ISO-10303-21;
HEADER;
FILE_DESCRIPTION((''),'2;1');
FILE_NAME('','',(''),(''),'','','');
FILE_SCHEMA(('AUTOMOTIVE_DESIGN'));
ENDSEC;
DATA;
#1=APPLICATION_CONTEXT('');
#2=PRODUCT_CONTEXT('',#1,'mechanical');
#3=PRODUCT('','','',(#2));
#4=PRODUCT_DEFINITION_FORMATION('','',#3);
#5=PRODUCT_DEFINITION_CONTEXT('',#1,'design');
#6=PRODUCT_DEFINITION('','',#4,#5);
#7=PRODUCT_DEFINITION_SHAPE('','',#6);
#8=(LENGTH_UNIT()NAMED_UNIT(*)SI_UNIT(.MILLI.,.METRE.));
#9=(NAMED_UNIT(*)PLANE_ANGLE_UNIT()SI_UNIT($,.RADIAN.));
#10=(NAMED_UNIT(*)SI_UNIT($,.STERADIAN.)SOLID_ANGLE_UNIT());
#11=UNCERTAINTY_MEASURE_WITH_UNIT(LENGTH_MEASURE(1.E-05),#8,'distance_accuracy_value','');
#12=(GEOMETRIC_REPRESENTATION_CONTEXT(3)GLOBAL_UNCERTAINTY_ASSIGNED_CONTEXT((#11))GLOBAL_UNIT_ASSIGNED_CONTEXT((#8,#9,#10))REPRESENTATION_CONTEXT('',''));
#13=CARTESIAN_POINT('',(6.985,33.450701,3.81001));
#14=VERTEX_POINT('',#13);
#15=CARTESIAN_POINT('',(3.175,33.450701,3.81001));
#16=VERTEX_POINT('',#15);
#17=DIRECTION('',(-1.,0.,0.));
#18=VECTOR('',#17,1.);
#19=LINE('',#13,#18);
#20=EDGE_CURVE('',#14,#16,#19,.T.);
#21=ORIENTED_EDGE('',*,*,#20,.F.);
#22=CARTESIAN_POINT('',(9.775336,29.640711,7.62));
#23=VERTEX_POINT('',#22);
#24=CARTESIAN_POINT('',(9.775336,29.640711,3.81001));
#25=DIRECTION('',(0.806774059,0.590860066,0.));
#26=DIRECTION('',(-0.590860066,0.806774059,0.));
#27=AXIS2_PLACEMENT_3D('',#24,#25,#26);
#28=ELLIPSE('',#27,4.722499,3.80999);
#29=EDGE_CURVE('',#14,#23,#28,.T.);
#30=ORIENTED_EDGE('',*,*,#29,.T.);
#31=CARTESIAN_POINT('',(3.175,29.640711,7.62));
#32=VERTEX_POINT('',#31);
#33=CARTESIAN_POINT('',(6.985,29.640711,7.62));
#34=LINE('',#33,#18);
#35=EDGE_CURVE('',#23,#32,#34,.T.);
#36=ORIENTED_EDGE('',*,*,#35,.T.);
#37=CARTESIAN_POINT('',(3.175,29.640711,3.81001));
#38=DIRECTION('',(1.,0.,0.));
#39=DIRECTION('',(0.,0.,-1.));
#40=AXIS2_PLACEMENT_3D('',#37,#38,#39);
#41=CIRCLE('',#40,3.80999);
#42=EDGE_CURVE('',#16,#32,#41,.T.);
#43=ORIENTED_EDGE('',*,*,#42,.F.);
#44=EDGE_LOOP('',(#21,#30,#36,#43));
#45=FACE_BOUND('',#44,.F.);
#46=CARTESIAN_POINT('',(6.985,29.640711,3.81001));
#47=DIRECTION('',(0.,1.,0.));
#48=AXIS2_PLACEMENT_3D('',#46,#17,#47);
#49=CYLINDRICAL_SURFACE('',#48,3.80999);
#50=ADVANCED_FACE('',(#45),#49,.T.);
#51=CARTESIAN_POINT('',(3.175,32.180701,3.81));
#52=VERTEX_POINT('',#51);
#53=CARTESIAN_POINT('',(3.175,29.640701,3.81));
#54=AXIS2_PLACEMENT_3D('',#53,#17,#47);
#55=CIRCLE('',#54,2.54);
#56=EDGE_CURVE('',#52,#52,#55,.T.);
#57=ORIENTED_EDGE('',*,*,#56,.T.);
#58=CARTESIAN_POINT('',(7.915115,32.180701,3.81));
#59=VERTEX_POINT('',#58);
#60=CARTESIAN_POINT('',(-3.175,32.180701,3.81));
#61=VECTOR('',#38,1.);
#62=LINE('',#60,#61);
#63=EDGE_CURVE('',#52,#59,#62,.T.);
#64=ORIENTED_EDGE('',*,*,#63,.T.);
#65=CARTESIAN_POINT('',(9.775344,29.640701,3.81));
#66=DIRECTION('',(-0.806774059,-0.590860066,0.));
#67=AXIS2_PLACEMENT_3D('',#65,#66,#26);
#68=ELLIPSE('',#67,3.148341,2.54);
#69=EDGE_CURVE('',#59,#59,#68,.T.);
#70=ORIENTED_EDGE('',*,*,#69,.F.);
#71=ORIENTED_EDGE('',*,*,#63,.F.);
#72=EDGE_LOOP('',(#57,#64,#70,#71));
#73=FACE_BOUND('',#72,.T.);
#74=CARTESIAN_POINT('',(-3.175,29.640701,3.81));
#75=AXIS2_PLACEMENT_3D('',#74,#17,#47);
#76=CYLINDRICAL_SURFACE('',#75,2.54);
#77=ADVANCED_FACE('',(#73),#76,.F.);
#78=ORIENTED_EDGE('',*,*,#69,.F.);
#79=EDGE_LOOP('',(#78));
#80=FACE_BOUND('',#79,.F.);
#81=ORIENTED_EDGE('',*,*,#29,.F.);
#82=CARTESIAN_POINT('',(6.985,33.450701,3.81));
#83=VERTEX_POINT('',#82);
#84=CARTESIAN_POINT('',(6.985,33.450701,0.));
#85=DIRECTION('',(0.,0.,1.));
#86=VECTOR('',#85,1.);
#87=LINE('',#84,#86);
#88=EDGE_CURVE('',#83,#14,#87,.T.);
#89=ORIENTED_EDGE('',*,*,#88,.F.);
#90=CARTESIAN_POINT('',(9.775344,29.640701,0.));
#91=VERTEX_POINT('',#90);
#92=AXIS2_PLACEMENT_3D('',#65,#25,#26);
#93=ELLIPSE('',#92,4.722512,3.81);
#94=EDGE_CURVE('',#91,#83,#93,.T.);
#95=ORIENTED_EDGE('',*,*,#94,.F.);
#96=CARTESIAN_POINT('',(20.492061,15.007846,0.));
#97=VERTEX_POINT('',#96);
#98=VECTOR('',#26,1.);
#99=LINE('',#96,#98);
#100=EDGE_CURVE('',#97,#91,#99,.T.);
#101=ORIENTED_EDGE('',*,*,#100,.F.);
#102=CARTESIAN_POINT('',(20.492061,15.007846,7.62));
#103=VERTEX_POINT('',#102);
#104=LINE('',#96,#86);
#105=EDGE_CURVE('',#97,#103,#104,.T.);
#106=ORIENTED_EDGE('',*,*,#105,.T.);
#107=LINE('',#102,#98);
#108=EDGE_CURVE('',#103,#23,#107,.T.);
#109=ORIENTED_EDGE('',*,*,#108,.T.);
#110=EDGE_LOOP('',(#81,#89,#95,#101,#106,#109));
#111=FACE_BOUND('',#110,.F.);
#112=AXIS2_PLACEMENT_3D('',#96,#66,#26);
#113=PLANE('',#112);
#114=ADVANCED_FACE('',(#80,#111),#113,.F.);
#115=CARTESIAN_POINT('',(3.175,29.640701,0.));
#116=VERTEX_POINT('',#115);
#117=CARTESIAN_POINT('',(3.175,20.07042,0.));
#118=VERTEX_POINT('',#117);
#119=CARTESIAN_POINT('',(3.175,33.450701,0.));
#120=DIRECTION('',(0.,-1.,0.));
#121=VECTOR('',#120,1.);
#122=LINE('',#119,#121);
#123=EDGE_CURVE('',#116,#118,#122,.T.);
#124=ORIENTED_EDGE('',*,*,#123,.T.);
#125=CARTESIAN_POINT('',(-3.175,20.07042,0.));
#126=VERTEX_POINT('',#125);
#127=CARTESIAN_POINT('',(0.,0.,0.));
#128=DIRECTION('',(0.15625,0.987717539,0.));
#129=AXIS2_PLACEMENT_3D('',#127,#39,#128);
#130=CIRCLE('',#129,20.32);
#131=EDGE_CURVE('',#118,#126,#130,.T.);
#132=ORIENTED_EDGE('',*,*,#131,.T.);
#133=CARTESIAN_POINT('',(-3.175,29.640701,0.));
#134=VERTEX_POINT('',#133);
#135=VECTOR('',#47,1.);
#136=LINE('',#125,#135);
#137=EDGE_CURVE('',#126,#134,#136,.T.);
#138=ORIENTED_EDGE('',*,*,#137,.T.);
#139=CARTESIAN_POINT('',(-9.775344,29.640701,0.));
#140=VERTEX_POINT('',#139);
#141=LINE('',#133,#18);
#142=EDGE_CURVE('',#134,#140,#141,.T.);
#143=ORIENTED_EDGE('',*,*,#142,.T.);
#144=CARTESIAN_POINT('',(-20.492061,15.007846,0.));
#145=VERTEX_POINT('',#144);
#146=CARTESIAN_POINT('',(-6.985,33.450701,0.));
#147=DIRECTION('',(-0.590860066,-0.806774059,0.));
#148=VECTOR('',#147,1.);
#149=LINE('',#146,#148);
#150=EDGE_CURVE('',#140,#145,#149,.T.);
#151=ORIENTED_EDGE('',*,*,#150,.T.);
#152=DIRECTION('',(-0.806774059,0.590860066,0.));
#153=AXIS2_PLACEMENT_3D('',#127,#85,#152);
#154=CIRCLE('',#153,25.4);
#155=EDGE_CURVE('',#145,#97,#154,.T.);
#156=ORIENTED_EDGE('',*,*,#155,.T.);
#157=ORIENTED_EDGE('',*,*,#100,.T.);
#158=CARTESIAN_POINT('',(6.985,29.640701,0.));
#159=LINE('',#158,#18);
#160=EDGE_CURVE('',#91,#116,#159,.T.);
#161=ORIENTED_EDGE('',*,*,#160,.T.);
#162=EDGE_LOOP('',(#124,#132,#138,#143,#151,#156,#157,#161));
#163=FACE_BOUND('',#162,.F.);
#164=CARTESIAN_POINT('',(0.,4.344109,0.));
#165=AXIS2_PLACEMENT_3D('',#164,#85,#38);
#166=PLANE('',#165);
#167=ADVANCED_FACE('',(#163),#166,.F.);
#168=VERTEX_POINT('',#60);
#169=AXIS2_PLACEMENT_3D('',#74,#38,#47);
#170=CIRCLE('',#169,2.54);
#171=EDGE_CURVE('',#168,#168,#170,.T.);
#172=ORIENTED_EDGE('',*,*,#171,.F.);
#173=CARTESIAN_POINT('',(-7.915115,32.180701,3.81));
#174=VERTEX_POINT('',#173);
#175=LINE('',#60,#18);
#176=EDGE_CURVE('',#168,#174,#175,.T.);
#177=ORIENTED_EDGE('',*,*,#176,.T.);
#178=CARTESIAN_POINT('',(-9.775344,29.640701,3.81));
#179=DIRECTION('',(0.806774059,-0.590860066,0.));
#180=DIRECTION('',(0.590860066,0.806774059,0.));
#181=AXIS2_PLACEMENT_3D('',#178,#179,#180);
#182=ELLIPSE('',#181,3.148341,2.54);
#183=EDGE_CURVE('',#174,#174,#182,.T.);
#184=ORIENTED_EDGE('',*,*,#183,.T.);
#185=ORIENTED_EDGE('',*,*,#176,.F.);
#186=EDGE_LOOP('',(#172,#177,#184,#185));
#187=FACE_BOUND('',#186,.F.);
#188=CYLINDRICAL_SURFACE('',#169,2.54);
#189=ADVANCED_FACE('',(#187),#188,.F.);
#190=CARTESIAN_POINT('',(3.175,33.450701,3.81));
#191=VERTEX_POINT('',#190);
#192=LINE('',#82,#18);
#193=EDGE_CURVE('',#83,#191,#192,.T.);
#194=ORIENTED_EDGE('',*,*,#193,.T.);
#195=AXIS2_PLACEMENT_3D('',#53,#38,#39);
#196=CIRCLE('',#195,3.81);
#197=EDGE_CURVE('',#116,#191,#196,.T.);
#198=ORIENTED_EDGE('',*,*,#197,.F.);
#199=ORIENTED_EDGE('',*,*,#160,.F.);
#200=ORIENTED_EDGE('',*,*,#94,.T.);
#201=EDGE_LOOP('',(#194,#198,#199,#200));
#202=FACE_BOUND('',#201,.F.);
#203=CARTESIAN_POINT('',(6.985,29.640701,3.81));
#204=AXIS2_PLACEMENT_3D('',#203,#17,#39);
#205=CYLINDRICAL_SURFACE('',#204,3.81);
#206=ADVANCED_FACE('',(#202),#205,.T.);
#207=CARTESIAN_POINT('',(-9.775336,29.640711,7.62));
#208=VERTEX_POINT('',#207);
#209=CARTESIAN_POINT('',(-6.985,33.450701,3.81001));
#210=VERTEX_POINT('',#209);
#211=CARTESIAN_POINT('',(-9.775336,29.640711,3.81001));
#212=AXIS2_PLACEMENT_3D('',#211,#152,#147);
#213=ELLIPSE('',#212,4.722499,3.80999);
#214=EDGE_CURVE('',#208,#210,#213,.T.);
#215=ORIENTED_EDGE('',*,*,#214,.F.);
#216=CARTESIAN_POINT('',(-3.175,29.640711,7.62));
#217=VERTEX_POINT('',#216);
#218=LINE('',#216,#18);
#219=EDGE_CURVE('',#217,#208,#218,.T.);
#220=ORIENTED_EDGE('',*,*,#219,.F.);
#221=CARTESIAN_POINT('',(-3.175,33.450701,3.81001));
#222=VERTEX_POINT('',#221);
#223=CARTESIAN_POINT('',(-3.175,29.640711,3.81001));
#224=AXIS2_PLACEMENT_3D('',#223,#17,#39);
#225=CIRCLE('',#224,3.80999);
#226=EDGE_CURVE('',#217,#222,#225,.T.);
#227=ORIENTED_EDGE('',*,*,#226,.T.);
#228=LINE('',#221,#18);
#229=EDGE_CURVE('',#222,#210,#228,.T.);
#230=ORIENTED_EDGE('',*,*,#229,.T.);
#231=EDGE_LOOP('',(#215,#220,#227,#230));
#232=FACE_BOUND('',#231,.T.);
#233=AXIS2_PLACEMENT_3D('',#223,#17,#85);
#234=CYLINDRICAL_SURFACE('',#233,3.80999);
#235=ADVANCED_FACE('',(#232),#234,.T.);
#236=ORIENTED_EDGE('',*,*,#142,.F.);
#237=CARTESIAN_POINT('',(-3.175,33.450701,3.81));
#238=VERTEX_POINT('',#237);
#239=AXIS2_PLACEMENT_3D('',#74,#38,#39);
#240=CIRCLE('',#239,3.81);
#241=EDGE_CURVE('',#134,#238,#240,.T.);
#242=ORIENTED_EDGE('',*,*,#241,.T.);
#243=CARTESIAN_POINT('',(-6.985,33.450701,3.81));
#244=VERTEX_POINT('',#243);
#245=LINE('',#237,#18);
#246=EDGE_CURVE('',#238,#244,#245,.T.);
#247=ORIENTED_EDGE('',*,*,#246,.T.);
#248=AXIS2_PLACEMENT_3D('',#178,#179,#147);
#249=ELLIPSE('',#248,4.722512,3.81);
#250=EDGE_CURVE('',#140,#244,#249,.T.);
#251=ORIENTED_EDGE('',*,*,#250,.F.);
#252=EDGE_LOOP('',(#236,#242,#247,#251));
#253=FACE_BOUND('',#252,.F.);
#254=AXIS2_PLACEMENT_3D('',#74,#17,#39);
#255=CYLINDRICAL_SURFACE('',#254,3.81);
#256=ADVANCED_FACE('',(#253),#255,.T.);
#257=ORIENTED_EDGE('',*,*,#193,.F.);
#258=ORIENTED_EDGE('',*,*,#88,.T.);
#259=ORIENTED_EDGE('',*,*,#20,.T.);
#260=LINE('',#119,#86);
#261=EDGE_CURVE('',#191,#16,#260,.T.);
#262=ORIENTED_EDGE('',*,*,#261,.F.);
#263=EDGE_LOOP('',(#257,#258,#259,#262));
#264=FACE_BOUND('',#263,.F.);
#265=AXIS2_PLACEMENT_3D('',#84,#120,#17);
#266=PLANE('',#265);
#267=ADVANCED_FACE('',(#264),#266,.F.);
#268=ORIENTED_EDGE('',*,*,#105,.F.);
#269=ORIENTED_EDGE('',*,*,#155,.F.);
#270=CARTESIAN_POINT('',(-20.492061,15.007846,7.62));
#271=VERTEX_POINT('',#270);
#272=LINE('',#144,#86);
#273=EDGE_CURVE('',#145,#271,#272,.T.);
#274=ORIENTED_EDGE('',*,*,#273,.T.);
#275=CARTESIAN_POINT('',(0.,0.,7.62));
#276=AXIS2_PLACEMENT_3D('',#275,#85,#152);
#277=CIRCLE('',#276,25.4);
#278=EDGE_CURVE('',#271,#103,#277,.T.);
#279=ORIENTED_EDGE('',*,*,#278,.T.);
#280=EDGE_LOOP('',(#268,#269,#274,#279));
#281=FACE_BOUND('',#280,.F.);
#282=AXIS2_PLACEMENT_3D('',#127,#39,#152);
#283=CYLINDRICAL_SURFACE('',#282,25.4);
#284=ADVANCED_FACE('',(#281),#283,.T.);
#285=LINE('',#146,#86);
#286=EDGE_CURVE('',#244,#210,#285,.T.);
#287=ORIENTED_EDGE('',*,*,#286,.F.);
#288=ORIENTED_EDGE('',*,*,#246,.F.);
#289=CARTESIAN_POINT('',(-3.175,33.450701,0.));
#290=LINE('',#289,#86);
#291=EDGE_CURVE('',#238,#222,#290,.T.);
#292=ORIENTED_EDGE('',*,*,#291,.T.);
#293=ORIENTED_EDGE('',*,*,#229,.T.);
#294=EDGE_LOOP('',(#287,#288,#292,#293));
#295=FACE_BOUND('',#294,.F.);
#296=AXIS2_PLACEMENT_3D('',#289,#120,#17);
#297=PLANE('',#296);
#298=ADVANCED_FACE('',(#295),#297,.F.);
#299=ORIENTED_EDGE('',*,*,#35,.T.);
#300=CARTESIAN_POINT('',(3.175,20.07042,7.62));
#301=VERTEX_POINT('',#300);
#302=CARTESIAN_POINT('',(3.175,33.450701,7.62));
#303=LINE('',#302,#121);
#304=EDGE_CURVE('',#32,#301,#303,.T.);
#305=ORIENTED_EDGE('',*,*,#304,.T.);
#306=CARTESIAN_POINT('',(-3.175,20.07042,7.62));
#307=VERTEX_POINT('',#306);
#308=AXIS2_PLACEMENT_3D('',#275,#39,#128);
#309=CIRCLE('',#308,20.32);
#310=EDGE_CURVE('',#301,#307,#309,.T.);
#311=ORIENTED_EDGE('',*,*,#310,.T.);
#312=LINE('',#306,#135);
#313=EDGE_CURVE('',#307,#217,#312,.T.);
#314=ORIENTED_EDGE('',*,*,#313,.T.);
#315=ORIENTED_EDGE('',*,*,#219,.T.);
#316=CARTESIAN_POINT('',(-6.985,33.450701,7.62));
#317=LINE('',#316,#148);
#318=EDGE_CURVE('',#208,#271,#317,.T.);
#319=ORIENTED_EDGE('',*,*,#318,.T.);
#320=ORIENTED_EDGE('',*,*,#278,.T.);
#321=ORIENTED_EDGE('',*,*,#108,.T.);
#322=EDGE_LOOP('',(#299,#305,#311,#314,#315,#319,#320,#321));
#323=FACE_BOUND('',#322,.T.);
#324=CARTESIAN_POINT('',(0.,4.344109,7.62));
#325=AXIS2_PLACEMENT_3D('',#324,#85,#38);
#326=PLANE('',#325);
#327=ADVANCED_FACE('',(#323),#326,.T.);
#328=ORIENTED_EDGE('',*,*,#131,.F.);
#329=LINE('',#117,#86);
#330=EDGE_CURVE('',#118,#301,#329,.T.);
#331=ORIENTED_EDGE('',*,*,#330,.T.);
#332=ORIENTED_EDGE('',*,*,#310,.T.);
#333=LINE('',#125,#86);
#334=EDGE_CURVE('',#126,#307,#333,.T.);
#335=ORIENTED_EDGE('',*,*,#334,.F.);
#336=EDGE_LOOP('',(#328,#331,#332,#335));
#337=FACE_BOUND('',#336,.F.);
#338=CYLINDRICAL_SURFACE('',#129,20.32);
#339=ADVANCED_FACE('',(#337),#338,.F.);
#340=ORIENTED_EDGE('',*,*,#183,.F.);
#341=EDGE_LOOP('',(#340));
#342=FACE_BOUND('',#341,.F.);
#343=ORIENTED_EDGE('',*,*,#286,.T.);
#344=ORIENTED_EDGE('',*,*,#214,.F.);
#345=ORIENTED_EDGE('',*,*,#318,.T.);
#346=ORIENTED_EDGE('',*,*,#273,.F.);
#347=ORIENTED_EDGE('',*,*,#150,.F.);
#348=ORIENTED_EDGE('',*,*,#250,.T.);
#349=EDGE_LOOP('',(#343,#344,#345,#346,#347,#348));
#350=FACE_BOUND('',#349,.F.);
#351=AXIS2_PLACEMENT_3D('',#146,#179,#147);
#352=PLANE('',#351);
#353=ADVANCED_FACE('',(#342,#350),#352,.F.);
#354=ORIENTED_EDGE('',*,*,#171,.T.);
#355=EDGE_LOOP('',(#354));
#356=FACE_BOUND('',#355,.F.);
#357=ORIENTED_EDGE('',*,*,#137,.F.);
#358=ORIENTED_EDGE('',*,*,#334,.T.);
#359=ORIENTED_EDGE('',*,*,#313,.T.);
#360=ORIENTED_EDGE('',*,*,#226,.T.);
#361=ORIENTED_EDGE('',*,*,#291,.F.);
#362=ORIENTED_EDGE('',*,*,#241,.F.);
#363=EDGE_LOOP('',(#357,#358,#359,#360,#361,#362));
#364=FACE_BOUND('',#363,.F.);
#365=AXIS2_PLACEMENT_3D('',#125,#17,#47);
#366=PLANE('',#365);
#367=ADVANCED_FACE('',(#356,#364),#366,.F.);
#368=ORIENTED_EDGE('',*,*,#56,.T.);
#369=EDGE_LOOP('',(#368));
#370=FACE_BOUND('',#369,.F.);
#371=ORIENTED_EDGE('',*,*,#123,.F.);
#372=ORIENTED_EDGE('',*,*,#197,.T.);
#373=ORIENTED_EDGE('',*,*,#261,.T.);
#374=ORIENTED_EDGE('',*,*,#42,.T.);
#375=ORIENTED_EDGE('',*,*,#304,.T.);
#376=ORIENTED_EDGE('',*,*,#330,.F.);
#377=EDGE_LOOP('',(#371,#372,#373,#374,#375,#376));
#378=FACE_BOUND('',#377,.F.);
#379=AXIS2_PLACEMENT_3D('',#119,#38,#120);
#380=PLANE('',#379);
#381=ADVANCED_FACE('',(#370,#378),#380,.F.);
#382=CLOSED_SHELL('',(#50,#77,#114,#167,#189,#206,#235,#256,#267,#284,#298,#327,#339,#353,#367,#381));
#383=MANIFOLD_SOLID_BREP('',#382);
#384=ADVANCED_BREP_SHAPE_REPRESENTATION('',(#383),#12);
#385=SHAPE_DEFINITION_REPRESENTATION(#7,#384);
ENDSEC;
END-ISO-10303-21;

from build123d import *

# Parameters (mm, degrees)
F1_DEPTH      = 7.62
F2_R          = 2.54
F3_DEPTH      = 25.4
F3_DEPTH_BACK = 25.4
F4_R          = 3.81
F5_R          = 3.80999


# Not quite as in the source:
# - a fillet or chamfer is up to 0.001 mm smaller than in the source, because OpenCascade refuses the exact size


with BuildPart() as f1:
    # F0 (on Top) → F1 (new body)
    with BuildSketch(Plane.XY):
        with BuildLine():
            ThreePointArc((3.175, 20.0704203992), (0, -20.32), (-3.175, 20.0704203992))
            Line((-3.175, 20.0704203992), (-3.175, 33.4507006653))
            Line((-3.175, 33.4507006653), (-6.985, 33.4507006653))
            Line((-6.985, 33.4507006653), (-20.4920611043, 15.0078456714))
            ThreePointArc((-20.4920611043, 15.0078456714), (0, -25.4), (20.4920611043, 15.0078456714))
            Line((20.4920611043, 15.0078456714), (6.985, 33.4507006653))
            Line((6.985, 33.4507006653), (3.175, 33.4507006653))
            Line((3.175, 33.4507006653), (3.175, 20.0704203992))
        make_face()
    extrude(amount=F1_DEPTH)

    # F2 (on face) → F3 (cut, two sides)
    with BuildSketch(Plane.YZ.offset(-3.175)) as f3_sk:
        with Locations((29.6407006653, 3.81)):
            Circle(F2_R)
    extrude(amount=F3_DEPTH, mode=Mode.SUBTRACT)
    extrude(f3_sk.sketch, amount=-F3_DEPTH_BACK, mode=Mode.SUBTRACT)

    # F4
    f4_edges = [f1.edges().sort_by_distance(p)[0] for p in [
        (-5.08, 33.450701, 0),
        (5.08, 33.450701, 0),
    ]]
    fillet(f4_edges, radius=F4_R)

    # F5 (radius 3.81 in the source; OpenCascade refuses exactly that, so slightly less here)
    f5_edges = [f1.edges().sort_by_distance(p)[0] for p in [
        (-5.08, 33.450701, 7.62),
        (5.08, 33.450701, 7.62),
    ]]
    fillet(f5_edges, radius=F5_R)


solid = f1.part
